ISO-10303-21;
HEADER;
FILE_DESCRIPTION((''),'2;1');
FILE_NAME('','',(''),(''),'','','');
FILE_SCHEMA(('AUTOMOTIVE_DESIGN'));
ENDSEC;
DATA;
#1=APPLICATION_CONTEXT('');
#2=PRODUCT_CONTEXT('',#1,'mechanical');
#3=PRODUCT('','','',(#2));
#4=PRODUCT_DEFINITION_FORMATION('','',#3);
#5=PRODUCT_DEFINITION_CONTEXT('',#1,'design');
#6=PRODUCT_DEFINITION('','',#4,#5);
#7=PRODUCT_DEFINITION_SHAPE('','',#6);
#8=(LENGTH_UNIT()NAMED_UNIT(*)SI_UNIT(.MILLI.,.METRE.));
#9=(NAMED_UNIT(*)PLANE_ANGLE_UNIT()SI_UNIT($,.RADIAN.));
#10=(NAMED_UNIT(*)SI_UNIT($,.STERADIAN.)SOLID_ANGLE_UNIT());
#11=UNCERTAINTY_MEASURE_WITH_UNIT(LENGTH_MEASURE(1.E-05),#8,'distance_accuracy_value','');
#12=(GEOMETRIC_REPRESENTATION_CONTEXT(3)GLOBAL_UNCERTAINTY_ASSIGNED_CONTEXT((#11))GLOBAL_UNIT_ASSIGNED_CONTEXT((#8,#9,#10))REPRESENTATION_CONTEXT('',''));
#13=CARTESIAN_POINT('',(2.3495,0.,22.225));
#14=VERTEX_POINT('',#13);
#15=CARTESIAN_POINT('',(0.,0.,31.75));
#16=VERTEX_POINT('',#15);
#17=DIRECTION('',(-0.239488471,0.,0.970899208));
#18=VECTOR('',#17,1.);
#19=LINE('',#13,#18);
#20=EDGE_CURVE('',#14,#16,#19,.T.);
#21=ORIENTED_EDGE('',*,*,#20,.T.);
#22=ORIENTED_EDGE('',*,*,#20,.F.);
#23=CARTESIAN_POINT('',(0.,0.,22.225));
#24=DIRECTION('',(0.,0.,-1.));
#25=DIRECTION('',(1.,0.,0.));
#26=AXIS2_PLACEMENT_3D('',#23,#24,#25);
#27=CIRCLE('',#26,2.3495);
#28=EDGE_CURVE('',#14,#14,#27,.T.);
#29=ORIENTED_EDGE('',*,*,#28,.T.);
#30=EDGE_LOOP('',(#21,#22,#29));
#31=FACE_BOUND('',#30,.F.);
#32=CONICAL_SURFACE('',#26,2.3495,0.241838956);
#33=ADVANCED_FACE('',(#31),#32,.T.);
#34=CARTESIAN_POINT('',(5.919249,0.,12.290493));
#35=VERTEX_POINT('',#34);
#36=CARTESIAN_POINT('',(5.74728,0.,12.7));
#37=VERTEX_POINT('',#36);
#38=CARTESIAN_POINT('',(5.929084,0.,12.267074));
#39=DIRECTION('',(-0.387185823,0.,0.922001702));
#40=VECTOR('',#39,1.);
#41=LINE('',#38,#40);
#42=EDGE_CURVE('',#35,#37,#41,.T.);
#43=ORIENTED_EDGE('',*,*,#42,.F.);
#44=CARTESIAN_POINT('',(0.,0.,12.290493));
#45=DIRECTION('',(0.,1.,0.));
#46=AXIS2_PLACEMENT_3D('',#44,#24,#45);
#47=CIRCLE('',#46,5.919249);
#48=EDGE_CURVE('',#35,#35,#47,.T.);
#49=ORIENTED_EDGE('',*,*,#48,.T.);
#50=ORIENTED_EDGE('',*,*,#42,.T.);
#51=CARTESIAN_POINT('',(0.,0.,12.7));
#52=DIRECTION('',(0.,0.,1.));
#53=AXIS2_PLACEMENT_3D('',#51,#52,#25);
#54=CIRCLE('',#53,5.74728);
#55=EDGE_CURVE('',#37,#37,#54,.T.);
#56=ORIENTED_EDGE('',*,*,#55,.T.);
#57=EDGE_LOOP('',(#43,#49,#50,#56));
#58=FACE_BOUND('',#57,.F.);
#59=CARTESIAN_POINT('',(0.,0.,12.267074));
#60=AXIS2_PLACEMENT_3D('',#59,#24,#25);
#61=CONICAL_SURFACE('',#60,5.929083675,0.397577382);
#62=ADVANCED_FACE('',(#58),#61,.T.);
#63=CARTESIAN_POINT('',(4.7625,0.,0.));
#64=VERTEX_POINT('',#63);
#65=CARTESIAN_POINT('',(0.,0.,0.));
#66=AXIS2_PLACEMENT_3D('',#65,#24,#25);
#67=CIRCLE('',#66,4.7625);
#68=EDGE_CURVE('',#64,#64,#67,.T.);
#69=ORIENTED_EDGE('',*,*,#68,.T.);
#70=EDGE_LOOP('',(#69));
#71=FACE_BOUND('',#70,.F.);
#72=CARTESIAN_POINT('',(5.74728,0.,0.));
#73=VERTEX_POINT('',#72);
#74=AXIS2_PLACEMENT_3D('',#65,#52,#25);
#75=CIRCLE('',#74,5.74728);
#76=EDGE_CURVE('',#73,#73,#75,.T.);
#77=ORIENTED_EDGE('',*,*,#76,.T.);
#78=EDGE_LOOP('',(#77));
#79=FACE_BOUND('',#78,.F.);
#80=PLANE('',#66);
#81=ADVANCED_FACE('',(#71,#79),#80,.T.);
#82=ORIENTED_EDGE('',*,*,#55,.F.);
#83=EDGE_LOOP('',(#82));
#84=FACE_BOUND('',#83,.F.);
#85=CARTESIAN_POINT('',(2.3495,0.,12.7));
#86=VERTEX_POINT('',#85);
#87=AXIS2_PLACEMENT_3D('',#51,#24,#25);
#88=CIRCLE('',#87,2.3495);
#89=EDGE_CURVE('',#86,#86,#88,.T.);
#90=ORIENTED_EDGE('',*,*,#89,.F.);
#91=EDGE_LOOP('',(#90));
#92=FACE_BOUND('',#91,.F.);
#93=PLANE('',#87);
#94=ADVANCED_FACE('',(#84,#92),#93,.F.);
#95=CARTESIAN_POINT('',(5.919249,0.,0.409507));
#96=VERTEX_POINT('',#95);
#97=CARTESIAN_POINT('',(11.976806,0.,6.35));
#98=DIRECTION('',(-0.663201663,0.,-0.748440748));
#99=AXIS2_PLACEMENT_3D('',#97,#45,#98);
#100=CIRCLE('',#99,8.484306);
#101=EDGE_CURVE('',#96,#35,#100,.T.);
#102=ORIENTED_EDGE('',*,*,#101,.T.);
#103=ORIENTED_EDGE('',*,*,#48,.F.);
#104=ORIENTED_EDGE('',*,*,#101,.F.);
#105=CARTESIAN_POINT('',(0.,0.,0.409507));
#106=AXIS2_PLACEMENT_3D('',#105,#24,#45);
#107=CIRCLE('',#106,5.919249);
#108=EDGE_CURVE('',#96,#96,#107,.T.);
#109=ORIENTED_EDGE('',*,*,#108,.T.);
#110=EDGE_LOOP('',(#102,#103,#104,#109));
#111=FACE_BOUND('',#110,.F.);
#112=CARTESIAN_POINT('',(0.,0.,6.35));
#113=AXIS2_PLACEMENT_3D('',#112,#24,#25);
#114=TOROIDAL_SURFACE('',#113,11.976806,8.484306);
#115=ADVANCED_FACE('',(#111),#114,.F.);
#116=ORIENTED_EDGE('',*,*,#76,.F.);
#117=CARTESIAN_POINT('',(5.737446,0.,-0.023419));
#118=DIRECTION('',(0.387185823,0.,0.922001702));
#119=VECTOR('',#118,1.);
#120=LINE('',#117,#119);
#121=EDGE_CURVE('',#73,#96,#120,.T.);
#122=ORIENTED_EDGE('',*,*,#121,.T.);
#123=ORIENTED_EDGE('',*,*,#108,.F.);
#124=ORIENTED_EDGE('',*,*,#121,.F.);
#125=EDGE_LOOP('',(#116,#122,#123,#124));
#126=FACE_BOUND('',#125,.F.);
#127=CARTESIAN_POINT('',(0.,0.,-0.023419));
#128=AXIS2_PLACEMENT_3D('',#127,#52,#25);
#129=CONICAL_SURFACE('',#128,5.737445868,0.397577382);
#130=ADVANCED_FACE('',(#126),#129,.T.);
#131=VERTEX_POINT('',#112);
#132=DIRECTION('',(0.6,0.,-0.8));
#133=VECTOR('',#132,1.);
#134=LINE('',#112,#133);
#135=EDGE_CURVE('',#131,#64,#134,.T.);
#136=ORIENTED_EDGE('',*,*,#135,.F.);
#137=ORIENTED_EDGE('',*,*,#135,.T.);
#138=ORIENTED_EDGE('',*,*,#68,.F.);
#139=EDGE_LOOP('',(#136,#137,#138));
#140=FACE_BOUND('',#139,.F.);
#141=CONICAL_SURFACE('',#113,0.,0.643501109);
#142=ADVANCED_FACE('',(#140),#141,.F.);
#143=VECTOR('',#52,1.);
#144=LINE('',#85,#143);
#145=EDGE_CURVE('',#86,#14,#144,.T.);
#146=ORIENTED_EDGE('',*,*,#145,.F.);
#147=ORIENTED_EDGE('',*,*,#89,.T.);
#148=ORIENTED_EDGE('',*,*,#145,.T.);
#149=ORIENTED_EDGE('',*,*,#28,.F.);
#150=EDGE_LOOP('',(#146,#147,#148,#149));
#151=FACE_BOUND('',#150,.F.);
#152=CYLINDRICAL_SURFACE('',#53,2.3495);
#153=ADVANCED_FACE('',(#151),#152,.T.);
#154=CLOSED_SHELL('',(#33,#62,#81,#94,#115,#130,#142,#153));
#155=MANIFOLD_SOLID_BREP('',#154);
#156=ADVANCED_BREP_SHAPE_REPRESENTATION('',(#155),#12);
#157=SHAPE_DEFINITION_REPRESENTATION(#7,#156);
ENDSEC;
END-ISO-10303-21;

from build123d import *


# Not quite as in the source:
# - a fillet or chamfer that OpenCascade refuses, or shapes differently, is made with other operations: its cross-section is extruded or revolved along the edge and cut away or added


with BuildPart() as f1:
    # F0 (on Front) → F1 (revolve)
    with BuildSketch(Plane.XZ):
        with BuildLine():
            Line((0, 31.75), (0, 6.35))
            Line((0, 6.35), (4.7625, 0))
            Line((4.7625, 0), (6.35, 0))
            ThreePointArc((6.35, 0), (3.4925, 6.35), (6.35, 12.7))
            Line((6.35, 12.7), (2.3495, 12.7))
            Line((2.3495, 12.7), (2.3495, 22.225))
            Line((2.3495, 22.225), (0, 31.75))
        make_face()
    revolve(axis=Axis((0, 0, 19.05), (0, 0, -1)))

    # F2: chamfer of 0.635 on 2 edges, made by hand

    # F2_s1 → F2_t2 (revolve, cut)
    with BuildSketch(Plane.XZ):
        with BuildLine():
            Line((5.929083675, 12.2670736629), (5.7374458679, 12.7234188432))
            Line((5.7374458679, 12.7234188432), (5.7374458679, 12.7361188432))
            ThreePointArc((5.7374458679, 12.7361188432), (6.043722934, 12.7127), (6.35, 12.7127))
            Line((6.35, 12.7127), (6.3584226611, 12.6904948025))
            ThreePointArc((6.3584226611, 12.6904948025), (6.1365228233, 12.4867090771), (5.9381511191, 12.2581814496))
            Line((5.9381511191, 12.2581814496), (5.929083675, 12.2670736629))
        make_face()
    revolve(axis=Axis((0, 0, 12.7), (0, 0, -1)), mode=Mode.SUBTRACT)

    # F2_s3 → F2_t4 (revolve, cut)
    with BuildSketch(Plane.XZ):
        with BuildLine():
            Line((5.7374458679, -0.0234188432), (5.929083675, 0.4329263371))
            Line((5.929083675, 0.4329263371), (5.9381511191, 0.4418185504))
            ThreePointArc((5.9381511191, 0.4418185504), (6.1365228233, 0.2132909229), (6.3584226611, 0.0095051975))
            Line((6.3584226611, 0.0095051975), (6.35, -0.0127))
            ThreePointArc((6.35, -0.0127), (6.043722934, -0.0127), (5.7374458679, -0.0361188432))
            Line((5.7374458679, -0.0361188432), (5.7374458679, -0.0234188432))
        make_face()
    revolve(axis=Axis((0, 0, 0), (0, 0, -1)), mode=Mode.SUBTRACT)


solid = f1.part
